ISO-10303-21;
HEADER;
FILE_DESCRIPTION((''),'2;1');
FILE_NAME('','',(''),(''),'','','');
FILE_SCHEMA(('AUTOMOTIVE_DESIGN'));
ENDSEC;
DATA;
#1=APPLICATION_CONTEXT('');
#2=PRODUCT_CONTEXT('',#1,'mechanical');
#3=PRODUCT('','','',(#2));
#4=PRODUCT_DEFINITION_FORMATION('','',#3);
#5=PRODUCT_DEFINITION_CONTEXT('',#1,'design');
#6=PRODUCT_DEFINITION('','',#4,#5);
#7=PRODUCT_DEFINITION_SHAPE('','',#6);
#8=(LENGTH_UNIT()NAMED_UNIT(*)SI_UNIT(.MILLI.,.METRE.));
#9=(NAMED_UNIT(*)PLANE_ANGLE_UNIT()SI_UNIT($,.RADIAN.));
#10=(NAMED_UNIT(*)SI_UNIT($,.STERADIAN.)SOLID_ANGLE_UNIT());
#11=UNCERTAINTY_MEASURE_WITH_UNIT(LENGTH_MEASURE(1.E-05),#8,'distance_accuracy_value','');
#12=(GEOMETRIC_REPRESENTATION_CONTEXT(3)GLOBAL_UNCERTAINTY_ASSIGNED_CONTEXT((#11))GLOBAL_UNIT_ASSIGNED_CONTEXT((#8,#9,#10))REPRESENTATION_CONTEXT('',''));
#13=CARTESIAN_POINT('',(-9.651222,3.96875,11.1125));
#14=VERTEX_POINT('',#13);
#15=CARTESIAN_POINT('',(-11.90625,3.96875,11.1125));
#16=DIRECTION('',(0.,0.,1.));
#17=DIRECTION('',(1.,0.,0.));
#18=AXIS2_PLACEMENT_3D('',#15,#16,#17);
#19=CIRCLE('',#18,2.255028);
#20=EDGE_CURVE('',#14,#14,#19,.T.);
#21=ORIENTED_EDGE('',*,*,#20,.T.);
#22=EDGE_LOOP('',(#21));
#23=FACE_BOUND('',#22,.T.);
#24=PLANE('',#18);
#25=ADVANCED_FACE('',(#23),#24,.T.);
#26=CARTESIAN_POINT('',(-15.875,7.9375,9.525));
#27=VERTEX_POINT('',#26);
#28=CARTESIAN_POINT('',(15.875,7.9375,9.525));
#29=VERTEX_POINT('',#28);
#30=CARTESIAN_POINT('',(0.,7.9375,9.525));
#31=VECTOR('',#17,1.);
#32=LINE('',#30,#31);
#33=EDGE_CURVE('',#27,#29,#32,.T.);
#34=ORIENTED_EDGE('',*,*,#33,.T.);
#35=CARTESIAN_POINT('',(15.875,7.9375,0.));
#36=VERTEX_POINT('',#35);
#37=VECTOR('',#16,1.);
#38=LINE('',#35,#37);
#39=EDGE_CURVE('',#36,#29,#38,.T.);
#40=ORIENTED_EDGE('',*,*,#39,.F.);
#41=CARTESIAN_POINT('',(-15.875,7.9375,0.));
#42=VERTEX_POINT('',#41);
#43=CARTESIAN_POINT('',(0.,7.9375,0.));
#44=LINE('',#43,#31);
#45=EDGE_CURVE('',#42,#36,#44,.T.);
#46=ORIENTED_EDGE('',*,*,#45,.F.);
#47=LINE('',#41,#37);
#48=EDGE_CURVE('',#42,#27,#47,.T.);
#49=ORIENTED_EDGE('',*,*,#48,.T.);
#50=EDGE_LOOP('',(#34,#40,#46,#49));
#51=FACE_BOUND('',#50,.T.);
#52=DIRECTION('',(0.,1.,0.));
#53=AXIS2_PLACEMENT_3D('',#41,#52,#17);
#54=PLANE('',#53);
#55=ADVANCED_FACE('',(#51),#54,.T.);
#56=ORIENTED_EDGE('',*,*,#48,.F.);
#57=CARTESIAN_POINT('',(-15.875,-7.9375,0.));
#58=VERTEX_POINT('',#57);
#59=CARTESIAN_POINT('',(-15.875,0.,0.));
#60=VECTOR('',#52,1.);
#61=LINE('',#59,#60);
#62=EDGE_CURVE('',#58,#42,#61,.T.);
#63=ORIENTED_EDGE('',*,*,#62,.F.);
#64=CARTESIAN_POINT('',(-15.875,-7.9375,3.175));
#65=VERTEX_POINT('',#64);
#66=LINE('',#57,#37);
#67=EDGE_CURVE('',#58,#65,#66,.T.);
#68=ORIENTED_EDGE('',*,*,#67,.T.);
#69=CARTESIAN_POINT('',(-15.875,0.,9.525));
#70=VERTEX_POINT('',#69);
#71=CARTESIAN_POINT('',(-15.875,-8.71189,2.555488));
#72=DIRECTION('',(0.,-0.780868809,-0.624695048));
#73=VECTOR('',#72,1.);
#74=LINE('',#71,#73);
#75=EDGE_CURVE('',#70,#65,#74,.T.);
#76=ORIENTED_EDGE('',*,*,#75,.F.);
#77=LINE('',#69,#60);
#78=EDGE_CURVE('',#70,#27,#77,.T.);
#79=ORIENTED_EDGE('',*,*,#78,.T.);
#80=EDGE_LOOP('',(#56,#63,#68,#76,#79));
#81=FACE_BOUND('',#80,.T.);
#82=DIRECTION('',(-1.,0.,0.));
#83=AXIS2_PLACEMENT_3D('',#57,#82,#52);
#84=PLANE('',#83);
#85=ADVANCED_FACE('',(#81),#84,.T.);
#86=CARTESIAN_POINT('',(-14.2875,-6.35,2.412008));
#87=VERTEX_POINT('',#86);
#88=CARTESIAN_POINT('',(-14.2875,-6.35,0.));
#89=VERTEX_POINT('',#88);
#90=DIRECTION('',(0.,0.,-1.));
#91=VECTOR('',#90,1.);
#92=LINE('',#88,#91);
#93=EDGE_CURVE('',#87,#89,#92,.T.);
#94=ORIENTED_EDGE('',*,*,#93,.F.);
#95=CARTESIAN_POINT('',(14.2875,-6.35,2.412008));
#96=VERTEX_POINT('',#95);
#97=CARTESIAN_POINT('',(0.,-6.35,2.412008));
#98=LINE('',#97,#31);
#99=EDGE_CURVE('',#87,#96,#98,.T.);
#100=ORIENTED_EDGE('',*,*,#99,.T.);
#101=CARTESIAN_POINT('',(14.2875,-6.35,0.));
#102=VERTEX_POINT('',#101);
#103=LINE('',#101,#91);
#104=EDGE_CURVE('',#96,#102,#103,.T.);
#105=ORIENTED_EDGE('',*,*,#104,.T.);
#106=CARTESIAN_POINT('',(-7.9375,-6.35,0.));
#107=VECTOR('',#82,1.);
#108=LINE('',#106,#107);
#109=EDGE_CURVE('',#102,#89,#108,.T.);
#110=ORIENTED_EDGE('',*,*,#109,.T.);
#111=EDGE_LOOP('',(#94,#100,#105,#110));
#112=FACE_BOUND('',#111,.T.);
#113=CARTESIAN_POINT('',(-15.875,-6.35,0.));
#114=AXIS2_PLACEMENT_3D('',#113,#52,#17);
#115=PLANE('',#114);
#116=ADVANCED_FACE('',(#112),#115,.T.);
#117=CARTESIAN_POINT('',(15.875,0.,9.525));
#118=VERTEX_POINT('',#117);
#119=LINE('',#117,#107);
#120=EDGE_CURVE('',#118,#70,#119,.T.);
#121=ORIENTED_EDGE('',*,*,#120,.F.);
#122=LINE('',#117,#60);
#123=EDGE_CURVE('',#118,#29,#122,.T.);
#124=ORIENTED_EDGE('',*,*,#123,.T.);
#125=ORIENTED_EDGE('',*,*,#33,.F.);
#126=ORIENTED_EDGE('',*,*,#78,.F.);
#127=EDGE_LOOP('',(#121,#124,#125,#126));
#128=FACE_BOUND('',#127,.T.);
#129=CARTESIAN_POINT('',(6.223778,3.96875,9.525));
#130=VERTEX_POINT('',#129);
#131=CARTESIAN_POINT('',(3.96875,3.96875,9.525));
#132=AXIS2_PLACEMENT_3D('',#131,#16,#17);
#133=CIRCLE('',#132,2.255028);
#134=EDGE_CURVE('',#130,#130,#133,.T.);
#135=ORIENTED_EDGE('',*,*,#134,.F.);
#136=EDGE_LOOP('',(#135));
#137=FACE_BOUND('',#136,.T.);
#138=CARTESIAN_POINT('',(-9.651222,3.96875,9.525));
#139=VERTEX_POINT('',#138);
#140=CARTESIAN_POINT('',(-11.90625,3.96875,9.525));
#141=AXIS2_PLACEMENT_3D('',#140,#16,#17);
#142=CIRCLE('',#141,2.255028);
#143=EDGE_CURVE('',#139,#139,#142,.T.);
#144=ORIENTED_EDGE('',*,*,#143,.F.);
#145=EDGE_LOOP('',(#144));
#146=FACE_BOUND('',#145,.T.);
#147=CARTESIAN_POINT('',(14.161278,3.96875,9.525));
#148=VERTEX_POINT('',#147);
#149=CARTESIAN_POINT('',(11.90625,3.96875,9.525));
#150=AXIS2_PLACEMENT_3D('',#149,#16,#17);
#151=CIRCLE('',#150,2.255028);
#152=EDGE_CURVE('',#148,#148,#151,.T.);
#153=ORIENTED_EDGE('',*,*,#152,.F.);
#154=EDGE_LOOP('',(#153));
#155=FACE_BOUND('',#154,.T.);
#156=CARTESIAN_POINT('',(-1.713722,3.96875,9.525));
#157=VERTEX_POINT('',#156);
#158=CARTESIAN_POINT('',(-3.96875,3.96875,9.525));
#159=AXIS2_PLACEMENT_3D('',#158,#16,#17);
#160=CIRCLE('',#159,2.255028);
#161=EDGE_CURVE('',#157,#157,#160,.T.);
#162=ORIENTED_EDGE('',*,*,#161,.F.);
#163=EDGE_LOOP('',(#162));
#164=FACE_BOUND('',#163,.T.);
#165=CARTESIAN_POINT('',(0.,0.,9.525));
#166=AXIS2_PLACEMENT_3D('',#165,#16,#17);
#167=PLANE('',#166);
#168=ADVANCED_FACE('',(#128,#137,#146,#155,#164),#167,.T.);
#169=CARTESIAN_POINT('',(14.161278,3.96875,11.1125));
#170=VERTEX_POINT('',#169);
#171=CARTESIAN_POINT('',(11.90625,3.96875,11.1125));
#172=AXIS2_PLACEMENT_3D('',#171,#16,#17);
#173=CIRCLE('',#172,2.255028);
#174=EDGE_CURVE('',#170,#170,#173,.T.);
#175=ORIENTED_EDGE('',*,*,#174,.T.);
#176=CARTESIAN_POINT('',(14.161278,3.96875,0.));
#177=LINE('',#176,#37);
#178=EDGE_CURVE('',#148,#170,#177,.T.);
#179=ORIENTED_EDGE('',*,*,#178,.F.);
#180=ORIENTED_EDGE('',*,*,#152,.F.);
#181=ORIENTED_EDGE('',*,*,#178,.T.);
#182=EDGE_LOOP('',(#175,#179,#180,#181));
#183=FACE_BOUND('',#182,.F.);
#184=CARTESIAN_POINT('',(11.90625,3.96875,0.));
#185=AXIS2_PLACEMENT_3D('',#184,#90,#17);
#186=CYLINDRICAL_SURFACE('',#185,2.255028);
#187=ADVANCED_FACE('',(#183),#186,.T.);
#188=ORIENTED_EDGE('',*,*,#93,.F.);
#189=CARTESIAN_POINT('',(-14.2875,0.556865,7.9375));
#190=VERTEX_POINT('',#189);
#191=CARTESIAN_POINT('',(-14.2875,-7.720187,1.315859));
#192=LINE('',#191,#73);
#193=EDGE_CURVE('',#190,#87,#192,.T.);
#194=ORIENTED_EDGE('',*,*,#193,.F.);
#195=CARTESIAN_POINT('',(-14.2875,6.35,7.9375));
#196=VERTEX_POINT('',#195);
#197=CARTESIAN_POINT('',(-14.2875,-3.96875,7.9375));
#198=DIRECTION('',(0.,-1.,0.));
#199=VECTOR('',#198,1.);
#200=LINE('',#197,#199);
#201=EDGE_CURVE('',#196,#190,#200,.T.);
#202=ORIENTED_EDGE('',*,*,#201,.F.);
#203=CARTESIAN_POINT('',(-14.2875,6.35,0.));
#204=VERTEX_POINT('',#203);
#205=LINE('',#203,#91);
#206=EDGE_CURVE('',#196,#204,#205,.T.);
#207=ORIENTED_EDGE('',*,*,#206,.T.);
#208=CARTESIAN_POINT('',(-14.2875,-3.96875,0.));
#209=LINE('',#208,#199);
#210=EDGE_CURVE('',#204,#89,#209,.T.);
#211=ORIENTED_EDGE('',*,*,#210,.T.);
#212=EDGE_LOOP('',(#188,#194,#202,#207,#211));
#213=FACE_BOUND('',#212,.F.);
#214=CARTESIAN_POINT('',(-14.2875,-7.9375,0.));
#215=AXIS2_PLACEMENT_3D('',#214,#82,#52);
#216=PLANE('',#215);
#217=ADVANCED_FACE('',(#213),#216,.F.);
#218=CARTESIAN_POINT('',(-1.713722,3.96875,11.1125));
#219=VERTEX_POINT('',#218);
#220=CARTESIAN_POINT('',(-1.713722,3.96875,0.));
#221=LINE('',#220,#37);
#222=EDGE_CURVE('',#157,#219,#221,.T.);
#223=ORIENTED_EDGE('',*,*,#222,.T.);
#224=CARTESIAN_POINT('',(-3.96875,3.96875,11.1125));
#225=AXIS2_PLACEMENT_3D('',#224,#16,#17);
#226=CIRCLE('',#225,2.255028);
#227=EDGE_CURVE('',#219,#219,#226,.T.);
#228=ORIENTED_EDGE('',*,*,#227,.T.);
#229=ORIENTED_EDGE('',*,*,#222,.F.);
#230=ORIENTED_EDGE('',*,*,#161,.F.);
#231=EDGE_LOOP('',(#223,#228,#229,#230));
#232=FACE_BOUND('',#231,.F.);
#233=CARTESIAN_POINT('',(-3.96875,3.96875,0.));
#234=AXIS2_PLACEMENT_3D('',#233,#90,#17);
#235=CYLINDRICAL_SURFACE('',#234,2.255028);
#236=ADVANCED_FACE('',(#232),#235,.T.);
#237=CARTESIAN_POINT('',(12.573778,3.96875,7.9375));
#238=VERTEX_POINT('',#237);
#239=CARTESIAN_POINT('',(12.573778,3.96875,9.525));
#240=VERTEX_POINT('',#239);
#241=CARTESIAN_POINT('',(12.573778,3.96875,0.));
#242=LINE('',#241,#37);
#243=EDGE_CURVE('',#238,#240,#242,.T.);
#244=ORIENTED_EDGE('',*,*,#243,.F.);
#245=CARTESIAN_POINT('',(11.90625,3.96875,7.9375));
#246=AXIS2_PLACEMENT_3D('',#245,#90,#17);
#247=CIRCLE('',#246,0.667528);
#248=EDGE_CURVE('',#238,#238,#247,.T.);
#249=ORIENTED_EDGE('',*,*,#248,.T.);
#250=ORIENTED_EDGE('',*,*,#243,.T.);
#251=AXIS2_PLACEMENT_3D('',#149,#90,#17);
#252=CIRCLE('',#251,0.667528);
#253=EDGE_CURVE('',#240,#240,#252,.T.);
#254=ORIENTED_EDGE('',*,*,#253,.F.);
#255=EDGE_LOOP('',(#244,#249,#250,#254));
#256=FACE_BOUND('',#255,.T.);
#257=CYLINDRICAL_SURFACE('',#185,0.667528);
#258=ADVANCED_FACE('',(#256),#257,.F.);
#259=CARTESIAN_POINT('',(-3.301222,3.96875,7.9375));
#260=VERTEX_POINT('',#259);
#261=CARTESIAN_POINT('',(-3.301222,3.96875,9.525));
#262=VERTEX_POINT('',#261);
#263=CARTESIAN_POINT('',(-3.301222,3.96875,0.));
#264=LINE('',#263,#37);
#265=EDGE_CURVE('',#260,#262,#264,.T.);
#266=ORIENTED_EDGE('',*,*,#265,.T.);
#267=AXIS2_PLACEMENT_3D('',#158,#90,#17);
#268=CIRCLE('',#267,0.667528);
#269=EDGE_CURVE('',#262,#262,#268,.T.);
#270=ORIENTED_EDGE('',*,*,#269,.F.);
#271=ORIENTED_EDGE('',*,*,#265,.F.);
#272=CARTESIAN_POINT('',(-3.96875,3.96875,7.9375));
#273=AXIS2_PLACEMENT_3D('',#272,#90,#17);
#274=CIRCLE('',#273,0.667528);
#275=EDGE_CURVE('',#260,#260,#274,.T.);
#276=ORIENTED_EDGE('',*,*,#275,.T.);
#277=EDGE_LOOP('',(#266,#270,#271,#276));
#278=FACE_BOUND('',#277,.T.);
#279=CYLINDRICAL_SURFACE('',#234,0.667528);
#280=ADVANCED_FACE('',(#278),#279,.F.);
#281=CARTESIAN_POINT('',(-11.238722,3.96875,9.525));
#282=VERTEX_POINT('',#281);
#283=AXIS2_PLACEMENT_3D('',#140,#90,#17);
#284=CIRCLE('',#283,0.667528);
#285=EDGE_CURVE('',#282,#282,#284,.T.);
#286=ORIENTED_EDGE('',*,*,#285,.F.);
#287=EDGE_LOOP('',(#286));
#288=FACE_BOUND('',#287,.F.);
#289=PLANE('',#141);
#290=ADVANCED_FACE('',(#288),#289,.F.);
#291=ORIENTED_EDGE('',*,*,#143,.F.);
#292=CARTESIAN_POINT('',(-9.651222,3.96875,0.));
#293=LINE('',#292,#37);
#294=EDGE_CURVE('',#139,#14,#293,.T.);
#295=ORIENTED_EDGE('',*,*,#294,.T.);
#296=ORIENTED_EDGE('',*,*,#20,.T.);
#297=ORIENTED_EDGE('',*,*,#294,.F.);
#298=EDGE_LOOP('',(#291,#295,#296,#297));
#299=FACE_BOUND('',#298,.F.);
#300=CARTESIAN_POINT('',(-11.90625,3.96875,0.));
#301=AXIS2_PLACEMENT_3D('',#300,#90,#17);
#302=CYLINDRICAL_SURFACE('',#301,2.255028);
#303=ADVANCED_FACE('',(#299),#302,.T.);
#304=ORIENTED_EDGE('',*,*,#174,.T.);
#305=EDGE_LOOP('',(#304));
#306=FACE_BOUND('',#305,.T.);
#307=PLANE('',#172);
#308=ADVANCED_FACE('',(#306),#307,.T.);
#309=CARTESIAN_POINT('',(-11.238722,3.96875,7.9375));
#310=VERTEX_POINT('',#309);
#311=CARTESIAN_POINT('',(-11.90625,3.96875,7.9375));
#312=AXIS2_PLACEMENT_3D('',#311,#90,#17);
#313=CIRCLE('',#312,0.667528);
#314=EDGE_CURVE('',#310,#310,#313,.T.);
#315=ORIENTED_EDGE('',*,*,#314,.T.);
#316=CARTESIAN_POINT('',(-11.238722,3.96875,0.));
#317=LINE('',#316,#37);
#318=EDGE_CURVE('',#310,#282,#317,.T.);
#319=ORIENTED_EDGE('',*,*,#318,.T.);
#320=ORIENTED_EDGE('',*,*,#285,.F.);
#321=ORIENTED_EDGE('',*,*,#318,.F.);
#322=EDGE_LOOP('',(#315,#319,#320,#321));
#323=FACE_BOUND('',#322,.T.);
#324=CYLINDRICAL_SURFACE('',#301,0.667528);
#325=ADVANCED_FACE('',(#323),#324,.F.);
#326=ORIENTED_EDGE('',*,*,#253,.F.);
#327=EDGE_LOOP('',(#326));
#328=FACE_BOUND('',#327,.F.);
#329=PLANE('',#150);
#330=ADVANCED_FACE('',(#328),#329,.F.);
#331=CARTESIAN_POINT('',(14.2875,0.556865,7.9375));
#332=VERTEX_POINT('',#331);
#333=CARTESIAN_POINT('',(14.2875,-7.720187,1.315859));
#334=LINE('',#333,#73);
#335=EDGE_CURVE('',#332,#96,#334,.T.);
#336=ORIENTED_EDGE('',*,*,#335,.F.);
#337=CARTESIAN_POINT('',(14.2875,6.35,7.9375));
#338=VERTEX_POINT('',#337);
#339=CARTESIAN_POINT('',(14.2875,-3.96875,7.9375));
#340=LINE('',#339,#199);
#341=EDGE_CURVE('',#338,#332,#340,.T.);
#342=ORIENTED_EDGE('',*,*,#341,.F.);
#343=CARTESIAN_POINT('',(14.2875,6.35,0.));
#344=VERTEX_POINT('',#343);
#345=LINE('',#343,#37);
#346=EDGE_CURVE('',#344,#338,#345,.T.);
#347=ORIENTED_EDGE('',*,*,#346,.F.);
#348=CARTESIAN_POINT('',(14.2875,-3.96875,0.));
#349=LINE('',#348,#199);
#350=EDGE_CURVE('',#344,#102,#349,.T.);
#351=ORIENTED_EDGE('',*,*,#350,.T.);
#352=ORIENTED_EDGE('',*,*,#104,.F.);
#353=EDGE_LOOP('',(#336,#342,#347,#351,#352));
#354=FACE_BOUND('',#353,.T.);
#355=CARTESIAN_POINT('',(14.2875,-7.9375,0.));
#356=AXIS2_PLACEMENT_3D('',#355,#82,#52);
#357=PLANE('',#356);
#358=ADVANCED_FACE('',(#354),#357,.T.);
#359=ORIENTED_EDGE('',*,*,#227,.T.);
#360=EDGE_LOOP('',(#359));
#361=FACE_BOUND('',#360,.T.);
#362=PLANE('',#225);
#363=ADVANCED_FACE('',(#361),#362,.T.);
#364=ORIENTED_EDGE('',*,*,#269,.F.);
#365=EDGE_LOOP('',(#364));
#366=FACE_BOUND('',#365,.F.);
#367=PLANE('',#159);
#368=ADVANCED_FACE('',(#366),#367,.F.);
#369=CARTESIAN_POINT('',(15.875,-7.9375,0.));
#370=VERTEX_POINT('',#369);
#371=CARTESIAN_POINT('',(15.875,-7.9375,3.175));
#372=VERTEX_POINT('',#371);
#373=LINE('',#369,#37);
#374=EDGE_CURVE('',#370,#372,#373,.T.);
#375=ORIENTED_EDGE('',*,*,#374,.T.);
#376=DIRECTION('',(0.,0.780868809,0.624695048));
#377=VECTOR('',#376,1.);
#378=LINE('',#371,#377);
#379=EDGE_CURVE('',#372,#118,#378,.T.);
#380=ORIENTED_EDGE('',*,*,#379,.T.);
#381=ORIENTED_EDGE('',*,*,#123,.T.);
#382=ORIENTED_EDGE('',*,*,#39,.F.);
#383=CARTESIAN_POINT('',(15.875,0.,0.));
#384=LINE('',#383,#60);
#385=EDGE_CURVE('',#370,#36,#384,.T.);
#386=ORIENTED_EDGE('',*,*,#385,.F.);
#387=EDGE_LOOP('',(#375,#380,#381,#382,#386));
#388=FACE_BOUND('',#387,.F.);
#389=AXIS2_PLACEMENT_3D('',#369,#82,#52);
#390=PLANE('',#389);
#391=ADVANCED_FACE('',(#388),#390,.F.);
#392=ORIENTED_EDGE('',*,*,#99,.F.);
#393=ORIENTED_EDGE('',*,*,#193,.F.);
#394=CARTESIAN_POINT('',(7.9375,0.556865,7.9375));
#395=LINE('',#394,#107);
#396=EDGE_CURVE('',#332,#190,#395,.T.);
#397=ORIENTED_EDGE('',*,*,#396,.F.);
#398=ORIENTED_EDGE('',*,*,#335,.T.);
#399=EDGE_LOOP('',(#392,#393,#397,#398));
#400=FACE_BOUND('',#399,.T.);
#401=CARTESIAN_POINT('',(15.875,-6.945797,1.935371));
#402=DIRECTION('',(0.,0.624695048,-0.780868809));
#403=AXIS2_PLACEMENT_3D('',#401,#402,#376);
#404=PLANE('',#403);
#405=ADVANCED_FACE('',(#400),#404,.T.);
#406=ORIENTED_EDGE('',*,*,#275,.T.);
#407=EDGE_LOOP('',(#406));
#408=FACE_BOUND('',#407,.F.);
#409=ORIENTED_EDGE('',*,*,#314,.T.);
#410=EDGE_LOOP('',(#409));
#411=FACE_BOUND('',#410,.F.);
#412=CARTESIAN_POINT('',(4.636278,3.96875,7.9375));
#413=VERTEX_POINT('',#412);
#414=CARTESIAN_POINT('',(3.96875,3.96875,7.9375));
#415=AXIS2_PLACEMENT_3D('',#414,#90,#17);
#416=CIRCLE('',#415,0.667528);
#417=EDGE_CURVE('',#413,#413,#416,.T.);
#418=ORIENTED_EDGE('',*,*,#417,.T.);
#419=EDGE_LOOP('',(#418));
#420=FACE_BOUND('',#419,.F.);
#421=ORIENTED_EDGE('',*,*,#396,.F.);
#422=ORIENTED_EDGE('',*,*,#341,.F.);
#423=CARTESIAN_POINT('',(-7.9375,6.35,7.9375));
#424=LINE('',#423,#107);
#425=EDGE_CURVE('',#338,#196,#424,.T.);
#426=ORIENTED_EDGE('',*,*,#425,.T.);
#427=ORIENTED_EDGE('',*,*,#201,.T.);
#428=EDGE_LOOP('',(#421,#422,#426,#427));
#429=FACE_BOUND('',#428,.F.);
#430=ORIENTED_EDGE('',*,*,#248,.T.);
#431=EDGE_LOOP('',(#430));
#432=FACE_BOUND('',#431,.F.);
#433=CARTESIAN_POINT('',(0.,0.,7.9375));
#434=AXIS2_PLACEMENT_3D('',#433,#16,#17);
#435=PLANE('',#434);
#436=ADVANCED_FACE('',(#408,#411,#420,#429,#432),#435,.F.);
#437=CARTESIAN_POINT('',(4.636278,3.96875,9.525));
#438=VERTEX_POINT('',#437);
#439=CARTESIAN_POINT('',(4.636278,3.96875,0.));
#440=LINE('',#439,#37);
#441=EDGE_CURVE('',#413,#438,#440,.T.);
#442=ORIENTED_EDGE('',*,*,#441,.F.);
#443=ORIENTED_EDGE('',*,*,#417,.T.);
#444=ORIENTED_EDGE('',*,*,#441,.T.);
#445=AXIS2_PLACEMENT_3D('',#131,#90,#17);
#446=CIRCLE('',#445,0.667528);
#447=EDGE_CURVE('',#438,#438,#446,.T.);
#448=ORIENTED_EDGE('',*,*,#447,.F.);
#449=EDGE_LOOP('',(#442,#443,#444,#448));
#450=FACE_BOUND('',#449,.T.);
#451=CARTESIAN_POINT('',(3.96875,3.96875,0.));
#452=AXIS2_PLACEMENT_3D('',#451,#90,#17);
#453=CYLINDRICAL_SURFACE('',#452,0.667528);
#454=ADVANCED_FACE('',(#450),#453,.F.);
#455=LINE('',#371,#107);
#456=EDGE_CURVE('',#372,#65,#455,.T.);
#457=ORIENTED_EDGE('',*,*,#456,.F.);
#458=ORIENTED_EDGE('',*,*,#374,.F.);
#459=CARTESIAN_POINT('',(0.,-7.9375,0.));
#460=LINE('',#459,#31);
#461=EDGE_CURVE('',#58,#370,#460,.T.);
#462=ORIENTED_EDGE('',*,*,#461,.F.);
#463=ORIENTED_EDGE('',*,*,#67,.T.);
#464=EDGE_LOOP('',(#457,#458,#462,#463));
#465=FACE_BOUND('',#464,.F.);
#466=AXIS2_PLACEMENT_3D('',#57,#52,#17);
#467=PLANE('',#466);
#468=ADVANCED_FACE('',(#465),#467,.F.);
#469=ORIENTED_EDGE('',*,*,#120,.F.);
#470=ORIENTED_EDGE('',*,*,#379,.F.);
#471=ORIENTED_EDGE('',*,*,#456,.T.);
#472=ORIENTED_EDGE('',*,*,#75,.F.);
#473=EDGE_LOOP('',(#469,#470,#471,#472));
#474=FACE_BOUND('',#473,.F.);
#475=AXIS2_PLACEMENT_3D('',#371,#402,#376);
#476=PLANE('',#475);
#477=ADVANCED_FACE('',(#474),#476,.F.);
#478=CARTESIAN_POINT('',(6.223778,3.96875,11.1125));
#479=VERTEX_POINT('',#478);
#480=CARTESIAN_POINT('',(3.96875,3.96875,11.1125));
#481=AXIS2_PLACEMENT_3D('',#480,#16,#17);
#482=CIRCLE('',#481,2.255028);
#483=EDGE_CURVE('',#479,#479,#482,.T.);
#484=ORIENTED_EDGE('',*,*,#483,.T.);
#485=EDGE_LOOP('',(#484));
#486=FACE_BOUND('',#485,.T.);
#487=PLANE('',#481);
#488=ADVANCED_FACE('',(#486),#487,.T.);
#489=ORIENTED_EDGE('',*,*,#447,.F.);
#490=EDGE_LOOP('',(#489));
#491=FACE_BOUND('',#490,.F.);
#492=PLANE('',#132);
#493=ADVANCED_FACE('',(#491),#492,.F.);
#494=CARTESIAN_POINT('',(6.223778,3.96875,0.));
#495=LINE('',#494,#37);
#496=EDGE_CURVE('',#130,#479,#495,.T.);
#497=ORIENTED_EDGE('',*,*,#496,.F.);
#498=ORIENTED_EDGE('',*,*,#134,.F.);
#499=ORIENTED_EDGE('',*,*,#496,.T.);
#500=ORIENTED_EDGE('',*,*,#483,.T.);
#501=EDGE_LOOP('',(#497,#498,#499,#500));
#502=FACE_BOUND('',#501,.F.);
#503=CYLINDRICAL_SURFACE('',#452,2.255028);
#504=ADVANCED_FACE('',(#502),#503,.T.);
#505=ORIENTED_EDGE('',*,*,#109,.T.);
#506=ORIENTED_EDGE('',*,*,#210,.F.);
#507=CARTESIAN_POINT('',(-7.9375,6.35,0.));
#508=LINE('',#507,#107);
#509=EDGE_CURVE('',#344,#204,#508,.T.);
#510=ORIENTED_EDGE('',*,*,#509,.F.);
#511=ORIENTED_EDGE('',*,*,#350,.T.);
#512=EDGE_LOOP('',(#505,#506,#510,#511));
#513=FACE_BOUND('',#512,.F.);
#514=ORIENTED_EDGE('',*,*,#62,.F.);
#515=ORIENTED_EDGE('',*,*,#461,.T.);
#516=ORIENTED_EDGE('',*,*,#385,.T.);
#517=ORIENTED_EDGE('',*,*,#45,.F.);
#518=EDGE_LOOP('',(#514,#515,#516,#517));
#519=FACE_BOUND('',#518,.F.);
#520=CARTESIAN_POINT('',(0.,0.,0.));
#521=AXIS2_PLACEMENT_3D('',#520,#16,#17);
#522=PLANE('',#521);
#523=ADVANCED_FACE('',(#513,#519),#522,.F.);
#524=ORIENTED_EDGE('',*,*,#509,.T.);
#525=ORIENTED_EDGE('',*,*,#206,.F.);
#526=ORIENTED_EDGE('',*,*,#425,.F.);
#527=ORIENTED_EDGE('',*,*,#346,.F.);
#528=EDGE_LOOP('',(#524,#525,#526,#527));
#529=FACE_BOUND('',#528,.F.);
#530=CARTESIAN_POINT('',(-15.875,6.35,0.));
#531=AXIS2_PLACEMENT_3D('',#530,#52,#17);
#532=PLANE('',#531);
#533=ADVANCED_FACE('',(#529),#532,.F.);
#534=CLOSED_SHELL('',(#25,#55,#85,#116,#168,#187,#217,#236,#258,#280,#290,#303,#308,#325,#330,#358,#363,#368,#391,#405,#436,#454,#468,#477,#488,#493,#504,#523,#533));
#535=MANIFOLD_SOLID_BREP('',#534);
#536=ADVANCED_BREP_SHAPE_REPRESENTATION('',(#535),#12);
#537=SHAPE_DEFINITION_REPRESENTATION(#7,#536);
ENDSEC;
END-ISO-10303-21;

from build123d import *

# Parameters (mm, degrees)
F0_W     = 31.75
F0_H     = 15.875
F0_R     = 2.2550277878
F1_DEPTH = 9.525
F2_DEPTH = 11.1125
F4_DEPTH = 31.751
F5_T     = -1.5875


# Not quite as in the source:
# - a feature names something its author has since deleted; it is built from what else it names


with BuildPart() as f1:
    # F0 (on Top) → F1 (new body)
    with BuildSketch(Plane.XY):
        Rectangle(F0_W, F0_H)
        with Locations((-11.90625, 3.96875)):
            Circle(F0_R, mode=Mode.SUBTRACT)
        with Locations((-3.96875, 3.96875)):
            Circle(F0_R, mode=Mode.SUBTRACT)
        with Locations((3.96875, 3.96875)):
            Circle(F0_R, mode=Mode.SUBTRACT)
        with Locations((11.90625, 3.96875)):
            Circle(F0_R, mode=Mode.SUBTRACT)
    extrude(amount=F1_DEPTH)

    # F0 (on Top) → F2 (join)
    with BuildSketch(Plane.XY):
        with Locations((-11.90625, 3.96875)):
            Circle(F0_R)
        with Locations((-3.96875, 3.96875)):
            Circle(F0_R)
        with Locations((3.96875, 3.96875)):
            Circle(F0_R)
        with Locations((11.90625, 3.96875)):
            Circle(F0_R)
    extrude(amount=F2_DEPTH)

    # F3 (on face) → F4 (cut, through all)
    with BuildSketch(Plane.YZ.offset(15.875)):
        Polygon((-7.9375, 9.525), (-7.9375, 3.175), (0, 9.525), align=None)
    extrude(amount=-F4_DEPTH, mode=Mode.SUBTRACT)

    # F5
    f5_openings = [f1.faces().sort_by_distance(p)[0] for p in [
        (0, 0, 0),
    ]]
    offset(amount=F5_T, openings=f5_openings, kind=Kind.INTERSECTION)


solid = f1.part
